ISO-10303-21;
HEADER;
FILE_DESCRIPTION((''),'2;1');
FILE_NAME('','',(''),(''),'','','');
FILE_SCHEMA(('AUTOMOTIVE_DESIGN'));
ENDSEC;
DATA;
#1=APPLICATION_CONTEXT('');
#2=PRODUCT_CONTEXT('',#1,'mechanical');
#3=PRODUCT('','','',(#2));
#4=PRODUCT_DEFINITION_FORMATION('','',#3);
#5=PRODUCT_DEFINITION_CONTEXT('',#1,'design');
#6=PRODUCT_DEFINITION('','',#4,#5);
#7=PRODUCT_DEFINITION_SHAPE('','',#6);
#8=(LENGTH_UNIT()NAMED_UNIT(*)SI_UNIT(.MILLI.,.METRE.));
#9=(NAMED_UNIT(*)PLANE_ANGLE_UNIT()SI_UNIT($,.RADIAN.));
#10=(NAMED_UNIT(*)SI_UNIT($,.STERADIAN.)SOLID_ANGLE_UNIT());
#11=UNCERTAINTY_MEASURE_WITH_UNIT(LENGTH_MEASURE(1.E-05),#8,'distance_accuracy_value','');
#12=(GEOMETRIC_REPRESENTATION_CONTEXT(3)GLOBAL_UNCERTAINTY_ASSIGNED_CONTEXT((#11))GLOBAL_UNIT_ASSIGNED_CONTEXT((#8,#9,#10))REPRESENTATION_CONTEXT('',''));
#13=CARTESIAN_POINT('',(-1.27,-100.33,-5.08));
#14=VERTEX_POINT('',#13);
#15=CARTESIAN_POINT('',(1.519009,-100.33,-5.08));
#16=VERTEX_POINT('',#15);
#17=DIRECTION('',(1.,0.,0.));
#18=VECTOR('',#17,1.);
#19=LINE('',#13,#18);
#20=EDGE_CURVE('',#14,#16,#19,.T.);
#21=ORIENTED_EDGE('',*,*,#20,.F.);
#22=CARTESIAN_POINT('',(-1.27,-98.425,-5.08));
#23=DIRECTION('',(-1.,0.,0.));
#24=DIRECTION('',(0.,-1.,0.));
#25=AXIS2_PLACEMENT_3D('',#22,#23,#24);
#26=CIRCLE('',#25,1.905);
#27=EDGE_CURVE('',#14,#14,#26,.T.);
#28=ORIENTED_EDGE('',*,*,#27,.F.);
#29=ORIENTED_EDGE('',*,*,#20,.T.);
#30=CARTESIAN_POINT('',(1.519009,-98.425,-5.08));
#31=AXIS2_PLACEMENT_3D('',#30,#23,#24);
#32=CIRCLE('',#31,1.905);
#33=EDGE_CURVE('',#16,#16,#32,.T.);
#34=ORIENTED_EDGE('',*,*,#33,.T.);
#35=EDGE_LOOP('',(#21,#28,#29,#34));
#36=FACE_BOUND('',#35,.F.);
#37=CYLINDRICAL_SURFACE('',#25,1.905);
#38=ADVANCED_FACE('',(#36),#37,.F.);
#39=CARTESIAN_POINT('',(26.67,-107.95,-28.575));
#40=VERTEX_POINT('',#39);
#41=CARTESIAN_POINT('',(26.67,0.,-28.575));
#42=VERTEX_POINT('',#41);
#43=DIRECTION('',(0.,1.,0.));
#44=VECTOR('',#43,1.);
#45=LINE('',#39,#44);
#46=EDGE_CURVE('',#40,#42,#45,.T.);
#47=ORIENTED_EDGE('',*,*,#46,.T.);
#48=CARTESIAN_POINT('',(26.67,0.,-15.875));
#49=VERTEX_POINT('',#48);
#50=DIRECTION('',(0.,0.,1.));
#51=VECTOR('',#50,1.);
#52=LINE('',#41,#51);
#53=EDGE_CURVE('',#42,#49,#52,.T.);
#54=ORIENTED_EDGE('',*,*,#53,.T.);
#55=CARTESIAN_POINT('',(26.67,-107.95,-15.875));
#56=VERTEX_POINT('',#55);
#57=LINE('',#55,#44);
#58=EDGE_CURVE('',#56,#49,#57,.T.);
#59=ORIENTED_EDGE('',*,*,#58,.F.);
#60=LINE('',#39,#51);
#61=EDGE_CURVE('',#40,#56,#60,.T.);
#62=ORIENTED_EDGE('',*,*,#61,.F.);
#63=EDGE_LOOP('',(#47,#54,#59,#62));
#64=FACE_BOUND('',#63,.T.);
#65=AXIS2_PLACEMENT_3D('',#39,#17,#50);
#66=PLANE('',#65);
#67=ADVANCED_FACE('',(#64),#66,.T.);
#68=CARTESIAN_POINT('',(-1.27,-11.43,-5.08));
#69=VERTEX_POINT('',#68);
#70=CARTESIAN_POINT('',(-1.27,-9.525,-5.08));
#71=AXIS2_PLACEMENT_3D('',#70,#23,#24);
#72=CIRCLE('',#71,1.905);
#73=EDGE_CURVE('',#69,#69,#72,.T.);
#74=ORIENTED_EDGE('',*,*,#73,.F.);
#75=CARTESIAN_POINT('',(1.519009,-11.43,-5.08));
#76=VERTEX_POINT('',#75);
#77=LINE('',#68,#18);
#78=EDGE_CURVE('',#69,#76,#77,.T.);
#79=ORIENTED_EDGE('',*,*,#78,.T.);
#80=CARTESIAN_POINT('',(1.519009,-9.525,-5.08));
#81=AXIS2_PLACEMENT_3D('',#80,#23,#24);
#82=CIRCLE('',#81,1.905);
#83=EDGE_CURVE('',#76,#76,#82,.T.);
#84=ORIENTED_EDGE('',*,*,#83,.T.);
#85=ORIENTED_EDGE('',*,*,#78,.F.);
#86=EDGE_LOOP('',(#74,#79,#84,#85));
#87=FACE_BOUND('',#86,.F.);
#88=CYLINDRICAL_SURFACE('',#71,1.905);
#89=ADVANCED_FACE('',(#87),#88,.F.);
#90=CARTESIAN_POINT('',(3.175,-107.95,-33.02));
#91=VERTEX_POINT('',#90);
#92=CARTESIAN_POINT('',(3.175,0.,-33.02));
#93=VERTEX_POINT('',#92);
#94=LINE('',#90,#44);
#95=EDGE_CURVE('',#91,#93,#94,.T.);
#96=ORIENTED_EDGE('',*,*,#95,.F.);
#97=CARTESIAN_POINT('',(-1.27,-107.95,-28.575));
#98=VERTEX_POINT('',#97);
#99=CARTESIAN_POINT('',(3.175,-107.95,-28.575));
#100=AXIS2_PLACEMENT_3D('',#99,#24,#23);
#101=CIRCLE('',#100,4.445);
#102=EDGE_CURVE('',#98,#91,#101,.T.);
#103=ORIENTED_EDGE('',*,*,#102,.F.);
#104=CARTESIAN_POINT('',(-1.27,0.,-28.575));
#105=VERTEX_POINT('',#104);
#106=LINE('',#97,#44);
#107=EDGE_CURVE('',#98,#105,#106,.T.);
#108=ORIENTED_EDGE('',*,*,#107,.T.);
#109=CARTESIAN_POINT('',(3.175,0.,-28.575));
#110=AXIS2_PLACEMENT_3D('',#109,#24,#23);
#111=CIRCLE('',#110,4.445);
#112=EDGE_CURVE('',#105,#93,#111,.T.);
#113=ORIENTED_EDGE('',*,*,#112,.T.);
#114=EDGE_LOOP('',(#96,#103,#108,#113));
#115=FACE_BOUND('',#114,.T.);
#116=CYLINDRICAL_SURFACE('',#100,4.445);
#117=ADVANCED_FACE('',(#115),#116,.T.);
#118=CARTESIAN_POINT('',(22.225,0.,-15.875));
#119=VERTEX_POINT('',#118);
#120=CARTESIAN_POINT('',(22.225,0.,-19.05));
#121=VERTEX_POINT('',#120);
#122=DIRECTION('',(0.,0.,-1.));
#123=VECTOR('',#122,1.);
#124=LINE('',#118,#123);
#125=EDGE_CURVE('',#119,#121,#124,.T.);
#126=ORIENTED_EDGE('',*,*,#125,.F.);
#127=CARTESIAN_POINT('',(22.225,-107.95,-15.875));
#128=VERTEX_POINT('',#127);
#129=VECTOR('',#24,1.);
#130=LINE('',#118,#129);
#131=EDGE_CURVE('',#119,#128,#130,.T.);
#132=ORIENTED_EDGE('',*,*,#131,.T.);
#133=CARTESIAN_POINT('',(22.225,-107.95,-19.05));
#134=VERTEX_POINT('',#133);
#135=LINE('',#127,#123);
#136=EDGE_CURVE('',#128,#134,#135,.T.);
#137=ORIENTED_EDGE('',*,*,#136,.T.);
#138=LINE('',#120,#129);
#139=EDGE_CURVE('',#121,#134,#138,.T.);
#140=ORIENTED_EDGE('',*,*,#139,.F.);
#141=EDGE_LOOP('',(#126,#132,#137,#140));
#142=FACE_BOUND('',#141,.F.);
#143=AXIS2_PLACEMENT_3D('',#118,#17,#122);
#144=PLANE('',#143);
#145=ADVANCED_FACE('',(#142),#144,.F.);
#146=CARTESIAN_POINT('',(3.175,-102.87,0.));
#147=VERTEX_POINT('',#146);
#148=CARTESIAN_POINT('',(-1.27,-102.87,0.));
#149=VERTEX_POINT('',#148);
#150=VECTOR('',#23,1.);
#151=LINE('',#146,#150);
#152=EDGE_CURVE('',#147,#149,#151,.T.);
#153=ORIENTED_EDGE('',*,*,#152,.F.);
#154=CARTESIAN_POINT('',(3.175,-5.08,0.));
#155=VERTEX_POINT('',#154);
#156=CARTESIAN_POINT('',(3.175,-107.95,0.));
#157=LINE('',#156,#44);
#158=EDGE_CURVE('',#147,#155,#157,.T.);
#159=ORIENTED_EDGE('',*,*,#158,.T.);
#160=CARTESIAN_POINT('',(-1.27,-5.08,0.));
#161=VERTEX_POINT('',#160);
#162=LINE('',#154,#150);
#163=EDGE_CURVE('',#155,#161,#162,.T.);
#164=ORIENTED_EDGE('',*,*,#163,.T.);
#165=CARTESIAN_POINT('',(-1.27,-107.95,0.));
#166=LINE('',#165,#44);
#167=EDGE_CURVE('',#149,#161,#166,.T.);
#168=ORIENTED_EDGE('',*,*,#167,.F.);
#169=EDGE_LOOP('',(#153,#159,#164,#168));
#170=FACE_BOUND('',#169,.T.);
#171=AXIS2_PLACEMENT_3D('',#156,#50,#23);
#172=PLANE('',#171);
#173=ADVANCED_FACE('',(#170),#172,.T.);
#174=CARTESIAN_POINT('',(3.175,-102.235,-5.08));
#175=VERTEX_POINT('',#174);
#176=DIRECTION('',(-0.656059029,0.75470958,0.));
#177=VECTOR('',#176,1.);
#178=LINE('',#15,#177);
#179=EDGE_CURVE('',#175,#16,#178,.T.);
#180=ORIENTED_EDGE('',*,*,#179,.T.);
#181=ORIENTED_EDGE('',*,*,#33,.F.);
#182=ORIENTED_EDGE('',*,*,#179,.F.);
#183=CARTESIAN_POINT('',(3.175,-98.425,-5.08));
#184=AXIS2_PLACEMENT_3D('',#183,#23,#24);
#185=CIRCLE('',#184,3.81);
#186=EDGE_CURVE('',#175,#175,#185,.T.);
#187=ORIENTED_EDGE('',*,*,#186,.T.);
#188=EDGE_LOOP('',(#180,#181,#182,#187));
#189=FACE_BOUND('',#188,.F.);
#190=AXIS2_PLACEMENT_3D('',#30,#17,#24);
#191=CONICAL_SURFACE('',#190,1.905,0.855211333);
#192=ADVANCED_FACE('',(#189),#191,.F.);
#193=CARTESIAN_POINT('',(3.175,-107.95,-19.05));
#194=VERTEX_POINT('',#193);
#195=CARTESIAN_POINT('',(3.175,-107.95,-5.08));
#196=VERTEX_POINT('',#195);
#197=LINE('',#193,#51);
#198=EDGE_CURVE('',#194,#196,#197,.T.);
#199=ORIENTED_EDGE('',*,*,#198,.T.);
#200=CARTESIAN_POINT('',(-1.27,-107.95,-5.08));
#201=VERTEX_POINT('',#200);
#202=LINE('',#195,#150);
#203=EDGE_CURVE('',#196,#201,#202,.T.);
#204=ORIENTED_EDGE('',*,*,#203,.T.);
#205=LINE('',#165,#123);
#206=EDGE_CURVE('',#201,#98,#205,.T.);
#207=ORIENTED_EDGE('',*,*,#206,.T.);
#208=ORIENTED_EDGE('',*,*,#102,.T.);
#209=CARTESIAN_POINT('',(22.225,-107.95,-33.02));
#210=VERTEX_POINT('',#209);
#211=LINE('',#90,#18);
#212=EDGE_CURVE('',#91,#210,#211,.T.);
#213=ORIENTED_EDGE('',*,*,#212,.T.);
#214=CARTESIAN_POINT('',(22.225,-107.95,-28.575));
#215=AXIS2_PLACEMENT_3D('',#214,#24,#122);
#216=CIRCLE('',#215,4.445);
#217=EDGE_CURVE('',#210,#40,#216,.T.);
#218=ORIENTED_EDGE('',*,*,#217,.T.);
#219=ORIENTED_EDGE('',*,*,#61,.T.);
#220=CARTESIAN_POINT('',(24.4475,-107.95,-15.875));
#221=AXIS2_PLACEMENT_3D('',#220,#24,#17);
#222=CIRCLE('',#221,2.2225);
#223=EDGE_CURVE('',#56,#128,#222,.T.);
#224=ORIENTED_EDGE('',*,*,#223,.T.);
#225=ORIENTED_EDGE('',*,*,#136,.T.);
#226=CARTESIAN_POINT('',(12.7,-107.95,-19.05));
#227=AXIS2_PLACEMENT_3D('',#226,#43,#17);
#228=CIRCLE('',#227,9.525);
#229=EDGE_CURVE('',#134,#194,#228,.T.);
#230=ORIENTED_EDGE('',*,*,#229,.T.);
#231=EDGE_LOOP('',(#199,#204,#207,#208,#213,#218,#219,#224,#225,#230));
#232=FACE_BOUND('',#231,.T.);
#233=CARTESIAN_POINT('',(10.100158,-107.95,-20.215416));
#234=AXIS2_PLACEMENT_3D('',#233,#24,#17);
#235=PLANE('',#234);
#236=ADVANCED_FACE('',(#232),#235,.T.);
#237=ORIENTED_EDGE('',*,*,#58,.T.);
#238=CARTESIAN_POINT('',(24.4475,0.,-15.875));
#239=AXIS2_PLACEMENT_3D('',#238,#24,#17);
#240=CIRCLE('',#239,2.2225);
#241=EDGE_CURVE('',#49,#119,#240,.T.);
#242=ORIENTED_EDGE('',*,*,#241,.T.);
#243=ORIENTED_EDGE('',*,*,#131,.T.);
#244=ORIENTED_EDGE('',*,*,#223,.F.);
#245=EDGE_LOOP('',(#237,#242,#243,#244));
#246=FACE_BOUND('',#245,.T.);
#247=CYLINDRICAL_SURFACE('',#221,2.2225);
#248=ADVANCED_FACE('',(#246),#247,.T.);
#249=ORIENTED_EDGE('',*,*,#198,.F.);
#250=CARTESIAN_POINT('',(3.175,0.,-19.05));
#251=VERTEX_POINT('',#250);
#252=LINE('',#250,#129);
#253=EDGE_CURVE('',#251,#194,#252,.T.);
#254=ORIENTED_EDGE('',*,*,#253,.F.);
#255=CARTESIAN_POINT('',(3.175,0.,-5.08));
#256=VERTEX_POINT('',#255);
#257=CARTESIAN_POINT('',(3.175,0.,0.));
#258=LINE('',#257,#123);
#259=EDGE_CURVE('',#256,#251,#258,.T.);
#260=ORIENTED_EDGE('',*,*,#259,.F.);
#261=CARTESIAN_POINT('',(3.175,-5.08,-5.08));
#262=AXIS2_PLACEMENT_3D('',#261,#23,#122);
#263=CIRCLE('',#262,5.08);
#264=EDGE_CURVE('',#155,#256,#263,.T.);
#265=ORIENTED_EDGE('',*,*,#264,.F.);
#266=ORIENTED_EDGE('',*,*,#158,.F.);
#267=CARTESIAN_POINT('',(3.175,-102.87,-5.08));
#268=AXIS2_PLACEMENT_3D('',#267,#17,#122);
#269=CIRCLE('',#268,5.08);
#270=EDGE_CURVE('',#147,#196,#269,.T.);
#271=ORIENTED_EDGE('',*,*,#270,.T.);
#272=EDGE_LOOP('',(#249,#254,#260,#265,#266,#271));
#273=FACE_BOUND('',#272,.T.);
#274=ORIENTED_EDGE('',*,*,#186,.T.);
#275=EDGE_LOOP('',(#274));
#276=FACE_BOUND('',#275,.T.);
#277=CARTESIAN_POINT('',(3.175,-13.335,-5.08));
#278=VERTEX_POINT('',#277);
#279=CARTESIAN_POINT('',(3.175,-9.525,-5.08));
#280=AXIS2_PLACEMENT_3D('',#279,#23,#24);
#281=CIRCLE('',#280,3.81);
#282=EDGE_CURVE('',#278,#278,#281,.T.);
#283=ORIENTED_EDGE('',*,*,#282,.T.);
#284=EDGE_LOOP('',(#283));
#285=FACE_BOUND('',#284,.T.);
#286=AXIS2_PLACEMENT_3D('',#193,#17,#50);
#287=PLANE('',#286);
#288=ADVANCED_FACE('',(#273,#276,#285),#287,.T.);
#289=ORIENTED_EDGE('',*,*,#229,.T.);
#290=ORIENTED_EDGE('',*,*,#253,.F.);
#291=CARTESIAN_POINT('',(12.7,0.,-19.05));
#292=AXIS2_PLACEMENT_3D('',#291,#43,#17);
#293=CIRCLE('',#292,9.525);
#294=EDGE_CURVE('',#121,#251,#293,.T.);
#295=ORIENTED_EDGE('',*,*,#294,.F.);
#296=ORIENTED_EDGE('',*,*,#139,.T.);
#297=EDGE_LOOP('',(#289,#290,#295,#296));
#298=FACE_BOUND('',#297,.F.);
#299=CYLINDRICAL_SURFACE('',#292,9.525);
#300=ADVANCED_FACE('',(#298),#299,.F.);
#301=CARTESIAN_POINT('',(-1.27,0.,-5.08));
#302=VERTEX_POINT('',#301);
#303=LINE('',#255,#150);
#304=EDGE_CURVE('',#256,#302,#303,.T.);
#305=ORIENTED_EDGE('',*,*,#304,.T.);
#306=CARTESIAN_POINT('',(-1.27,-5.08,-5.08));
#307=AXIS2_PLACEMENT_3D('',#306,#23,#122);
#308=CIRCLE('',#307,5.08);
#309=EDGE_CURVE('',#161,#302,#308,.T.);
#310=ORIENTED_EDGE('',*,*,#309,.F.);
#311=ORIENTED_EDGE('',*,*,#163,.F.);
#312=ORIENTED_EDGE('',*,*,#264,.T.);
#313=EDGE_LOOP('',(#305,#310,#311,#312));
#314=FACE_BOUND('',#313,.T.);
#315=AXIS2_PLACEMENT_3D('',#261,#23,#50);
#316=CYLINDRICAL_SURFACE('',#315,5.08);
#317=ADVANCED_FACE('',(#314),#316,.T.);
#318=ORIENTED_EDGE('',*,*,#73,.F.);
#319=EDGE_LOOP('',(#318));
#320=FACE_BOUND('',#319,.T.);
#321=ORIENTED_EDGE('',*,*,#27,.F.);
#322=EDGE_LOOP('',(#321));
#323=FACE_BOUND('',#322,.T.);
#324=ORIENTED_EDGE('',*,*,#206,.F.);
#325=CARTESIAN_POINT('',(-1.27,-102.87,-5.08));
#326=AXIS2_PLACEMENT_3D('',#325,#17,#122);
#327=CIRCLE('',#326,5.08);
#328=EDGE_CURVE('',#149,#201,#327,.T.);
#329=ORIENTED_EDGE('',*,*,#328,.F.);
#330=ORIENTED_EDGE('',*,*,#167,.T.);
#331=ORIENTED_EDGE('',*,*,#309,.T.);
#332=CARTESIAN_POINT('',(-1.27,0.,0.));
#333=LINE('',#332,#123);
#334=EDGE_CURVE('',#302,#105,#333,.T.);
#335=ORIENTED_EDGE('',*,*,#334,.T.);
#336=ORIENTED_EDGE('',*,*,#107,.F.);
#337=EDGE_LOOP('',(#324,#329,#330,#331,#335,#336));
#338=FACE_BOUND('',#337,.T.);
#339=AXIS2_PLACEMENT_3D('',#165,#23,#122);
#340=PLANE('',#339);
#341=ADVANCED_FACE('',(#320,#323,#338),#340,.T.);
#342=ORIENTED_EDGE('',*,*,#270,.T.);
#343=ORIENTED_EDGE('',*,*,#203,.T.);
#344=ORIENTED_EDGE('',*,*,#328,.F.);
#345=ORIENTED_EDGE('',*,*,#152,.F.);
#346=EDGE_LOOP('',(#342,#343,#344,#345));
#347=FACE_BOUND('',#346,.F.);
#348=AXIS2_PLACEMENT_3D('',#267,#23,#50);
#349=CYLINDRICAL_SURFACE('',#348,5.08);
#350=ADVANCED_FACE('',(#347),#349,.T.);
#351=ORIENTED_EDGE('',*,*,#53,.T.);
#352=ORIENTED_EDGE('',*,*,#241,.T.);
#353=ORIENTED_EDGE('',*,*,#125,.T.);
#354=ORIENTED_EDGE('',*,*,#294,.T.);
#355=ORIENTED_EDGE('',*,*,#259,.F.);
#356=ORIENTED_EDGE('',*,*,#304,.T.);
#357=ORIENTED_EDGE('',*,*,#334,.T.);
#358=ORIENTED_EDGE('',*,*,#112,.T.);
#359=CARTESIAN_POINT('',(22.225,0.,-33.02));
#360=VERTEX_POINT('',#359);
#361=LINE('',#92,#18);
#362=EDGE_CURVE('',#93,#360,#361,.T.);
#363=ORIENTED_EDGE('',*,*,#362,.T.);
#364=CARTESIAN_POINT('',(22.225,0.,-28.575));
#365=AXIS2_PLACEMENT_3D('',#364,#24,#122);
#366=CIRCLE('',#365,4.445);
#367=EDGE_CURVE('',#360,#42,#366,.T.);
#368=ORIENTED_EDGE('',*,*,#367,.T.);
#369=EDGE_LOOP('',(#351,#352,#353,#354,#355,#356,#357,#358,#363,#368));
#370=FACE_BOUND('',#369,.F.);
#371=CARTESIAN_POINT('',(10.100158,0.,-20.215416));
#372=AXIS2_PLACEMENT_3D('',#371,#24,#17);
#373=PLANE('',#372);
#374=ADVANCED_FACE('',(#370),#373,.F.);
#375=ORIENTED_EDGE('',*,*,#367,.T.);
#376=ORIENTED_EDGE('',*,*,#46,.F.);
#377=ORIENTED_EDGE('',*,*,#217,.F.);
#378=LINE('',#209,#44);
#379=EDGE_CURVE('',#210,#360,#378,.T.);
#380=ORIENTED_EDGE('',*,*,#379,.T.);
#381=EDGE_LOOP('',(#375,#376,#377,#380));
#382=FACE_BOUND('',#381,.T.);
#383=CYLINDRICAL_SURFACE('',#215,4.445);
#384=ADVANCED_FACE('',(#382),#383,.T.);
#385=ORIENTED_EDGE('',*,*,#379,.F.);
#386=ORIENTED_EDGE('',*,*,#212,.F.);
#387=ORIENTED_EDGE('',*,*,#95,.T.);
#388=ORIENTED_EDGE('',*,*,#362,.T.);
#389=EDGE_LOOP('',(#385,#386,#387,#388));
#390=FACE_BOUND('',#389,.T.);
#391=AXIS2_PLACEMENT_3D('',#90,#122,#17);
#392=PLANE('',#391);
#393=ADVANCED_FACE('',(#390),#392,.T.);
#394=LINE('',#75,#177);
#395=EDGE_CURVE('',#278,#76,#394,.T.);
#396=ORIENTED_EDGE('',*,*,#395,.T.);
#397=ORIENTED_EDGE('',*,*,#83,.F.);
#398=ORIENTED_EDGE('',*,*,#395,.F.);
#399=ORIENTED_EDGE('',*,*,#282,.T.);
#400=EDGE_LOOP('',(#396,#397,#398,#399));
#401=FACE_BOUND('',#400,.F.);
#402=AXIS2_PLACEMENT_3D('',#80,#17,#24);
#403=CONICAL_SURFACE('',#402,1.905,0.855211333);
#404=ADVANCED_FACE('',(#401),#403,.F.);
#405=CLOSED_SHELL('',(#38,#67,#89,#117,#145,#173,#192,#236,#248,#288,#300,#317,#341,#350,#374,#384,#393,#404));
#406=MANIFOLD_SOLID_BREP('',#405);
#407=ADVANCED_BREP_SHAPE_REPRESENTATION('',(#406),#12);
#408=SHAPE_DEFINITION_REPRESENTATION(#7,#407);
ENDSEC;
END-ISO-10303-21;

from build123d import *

# Parameters (mm, degrees)
F1_DEPTH  = 107.95
F3_R      = 1.5875
F2_R      = 1.905
F4_DEPTH  = 25.4
F5_SIZE2  = 1.4351924041
F5_SIZE   = 1.651
F7_DEPTH  = 107.95
F8_R      = 1.905
F9_DEPTH  = 25.4
F10_SIZE2 = 1.6559912355
F10_SIZE  = 1.905
F11_R     = 5.08


with BuildPart() as f1:
    # F0 (on Front) → F1 (new body)
    with BuildSketch(Plane.XZ):
        with BuildLine():
            Line((3.175, 0), (0, 0))
            Line((0, 0), (0, -28.575))
            ThreePointArc((0, -28.575), (0.9299359697, -30.8200640303), (3.175, -31.75))
            Line((3.175, -31.75), (22.225, -31.75))
            ThreePointArc((22.225, -31.75), (24.4700640303, -30.8200640303), (25.4, -28.575))
            Line((25.4, -28.575), (25.4, -15.875))
            ThreePointArc((25.4, -15.875), (23.8125, -14.2875), (22.225, -15.875))
            Line((22.225, -15.875), (22.225, -19.05))
            ThreePointArc((22.225, -19.05), (12.7, -28.575), (3.175, -19.05))
            Line((3.175, -19.05), (3.175, 0))
        make_face()
    extrude(amount=F1_DEPTH)

    # F3
    f3_edges = [f1.edges().sort_by_distance(p)[0] for p in [
        (1.5875, 0, 0),
        (1.5875, -107.95, 0),
    ]]
    fillet(f3_edges, radius=F3_R)

    # F2 (on face) → F4 (cut)
    with BuildSketch(Plane(origin=(0, 0, 0), x_dir=(0, -1, 0), z_dir=(-1, 0, 0))):
        with Locations((9.525, -5.08)):
            Circle(F2_R)
        with Locations((98.425, -5.08)):
            Circle(F2_R)
    extrude(amount=-F4_DEPTH, mode=Mode.SUBTRACT)

    # F5
    f5_edges = [f1.edges().sort_by_distance(p)[0] for p in [
        (3.175, -96.52, -5.08),
        (3.175, -7.62, -5.08),
    ]]
    chamfer(f5_edges, length=F5_SIZE, length2=F5_SIZE2)

    # F6 (on face) → F7 (join, through all)
    with BuildSketch(Plane.XZ.offset(107.95)):
        with BuildLine():
            Line((3.175, 0), (0, 0))
            Line((0, 0), (0, -28.575))
            ThreePointArc((0, -28.575), (0.9299359697, -30.8200640303), (3.175, -31.75))
            Line((3.175, -31.75), (22.225, -31.75))
            ThreePointArc((22.225, -31.75), (24.4700640303, -30.8200640303), (25.4, -28.575))
            Line((25.4, -28.575), (25.4, -15.875))
            ThreePointArc((25.4, -15.875), (23.8125, -14.2875), (22.225, -15.875))
            Line((22.225, -15.875), (22.225, -19.05))
            ThreePointArc((22.225, -19.05), (12.7, -28.575), (3.175, -19.05))
            Line((3.175, -19.05), (3.175, 0))
        make_face()
        with BuildLine():
            Line((0, -28.575), (0, 0))
            Line((0, 0), (-1.27, 0))
            Line((-1.27, 0), (-1.27, -28.575))
            ThreePointArc((-1.27, -28.575), (0.0319103576, -31.7180896424), (3.175, -33.02))
            Line((3.175, -33.02), (22.225, -33.02))
            ThreePointArc((22.225, -33.02), (25.3680896424, -31.7180896424), (26.67, -28.575))
            Line((26.67, -28.575), (26.67, -15.875))
            ThreePointArc((26.67, -15.875), (24.4475, -13.6525), (22.225, -15.875))
            ThreePointArc((22.225, -15.875), (23.8125, -14.2875), (25.4, -15.875))
            Line((25.4, -15.875), (25.4, -28.575))
            ThreePointArc((25.4, -28.575), (24.4700640303, -30.8200640303), (22.225, -31.75))
            Line((22.225, -31.75), (3.175, -31.75))
            ThreePointArc((3.175, -31.75), (0.9299359697, -30.8200640303), (0, -28.575))
        make_face()
    extrude(amount=-F7_DEPTH)

    # F8 (on face) → F9 (cut)
    with BuildSketch(Plane(origin=(-1.27, 0, 0), x_dir=(0, -1, 0), z_dir=(-1, 0, 0))):
        with Locations((9.525, -5.08)):
            Circle(F8_R)
        with Locations((98.425, -5.08)):
            Circle(F8_R)
    extrude(amount=-F9_DEPTH, mode=Mode.SUBTRACT)

    # F10
    f10_edges = [f1.edges().sort_by_distance(p)[0] for p in [
        (3.175, -96.52, -5.08),
        (3.175, -7.62, -5.08),
    ]]
    chamfer(f10_edges, length=F10_SIZE, length2=F10_SIZE2)

    # F11
    f11_edges = [f1.edges().sort_by_distance(p)[0] for p in [
        (0.9525, -107.95, 0),
        (0.9525, 0, 0),
    ]]
    fillet(f11_edges, radius=F11_R)


solid = f1.part
